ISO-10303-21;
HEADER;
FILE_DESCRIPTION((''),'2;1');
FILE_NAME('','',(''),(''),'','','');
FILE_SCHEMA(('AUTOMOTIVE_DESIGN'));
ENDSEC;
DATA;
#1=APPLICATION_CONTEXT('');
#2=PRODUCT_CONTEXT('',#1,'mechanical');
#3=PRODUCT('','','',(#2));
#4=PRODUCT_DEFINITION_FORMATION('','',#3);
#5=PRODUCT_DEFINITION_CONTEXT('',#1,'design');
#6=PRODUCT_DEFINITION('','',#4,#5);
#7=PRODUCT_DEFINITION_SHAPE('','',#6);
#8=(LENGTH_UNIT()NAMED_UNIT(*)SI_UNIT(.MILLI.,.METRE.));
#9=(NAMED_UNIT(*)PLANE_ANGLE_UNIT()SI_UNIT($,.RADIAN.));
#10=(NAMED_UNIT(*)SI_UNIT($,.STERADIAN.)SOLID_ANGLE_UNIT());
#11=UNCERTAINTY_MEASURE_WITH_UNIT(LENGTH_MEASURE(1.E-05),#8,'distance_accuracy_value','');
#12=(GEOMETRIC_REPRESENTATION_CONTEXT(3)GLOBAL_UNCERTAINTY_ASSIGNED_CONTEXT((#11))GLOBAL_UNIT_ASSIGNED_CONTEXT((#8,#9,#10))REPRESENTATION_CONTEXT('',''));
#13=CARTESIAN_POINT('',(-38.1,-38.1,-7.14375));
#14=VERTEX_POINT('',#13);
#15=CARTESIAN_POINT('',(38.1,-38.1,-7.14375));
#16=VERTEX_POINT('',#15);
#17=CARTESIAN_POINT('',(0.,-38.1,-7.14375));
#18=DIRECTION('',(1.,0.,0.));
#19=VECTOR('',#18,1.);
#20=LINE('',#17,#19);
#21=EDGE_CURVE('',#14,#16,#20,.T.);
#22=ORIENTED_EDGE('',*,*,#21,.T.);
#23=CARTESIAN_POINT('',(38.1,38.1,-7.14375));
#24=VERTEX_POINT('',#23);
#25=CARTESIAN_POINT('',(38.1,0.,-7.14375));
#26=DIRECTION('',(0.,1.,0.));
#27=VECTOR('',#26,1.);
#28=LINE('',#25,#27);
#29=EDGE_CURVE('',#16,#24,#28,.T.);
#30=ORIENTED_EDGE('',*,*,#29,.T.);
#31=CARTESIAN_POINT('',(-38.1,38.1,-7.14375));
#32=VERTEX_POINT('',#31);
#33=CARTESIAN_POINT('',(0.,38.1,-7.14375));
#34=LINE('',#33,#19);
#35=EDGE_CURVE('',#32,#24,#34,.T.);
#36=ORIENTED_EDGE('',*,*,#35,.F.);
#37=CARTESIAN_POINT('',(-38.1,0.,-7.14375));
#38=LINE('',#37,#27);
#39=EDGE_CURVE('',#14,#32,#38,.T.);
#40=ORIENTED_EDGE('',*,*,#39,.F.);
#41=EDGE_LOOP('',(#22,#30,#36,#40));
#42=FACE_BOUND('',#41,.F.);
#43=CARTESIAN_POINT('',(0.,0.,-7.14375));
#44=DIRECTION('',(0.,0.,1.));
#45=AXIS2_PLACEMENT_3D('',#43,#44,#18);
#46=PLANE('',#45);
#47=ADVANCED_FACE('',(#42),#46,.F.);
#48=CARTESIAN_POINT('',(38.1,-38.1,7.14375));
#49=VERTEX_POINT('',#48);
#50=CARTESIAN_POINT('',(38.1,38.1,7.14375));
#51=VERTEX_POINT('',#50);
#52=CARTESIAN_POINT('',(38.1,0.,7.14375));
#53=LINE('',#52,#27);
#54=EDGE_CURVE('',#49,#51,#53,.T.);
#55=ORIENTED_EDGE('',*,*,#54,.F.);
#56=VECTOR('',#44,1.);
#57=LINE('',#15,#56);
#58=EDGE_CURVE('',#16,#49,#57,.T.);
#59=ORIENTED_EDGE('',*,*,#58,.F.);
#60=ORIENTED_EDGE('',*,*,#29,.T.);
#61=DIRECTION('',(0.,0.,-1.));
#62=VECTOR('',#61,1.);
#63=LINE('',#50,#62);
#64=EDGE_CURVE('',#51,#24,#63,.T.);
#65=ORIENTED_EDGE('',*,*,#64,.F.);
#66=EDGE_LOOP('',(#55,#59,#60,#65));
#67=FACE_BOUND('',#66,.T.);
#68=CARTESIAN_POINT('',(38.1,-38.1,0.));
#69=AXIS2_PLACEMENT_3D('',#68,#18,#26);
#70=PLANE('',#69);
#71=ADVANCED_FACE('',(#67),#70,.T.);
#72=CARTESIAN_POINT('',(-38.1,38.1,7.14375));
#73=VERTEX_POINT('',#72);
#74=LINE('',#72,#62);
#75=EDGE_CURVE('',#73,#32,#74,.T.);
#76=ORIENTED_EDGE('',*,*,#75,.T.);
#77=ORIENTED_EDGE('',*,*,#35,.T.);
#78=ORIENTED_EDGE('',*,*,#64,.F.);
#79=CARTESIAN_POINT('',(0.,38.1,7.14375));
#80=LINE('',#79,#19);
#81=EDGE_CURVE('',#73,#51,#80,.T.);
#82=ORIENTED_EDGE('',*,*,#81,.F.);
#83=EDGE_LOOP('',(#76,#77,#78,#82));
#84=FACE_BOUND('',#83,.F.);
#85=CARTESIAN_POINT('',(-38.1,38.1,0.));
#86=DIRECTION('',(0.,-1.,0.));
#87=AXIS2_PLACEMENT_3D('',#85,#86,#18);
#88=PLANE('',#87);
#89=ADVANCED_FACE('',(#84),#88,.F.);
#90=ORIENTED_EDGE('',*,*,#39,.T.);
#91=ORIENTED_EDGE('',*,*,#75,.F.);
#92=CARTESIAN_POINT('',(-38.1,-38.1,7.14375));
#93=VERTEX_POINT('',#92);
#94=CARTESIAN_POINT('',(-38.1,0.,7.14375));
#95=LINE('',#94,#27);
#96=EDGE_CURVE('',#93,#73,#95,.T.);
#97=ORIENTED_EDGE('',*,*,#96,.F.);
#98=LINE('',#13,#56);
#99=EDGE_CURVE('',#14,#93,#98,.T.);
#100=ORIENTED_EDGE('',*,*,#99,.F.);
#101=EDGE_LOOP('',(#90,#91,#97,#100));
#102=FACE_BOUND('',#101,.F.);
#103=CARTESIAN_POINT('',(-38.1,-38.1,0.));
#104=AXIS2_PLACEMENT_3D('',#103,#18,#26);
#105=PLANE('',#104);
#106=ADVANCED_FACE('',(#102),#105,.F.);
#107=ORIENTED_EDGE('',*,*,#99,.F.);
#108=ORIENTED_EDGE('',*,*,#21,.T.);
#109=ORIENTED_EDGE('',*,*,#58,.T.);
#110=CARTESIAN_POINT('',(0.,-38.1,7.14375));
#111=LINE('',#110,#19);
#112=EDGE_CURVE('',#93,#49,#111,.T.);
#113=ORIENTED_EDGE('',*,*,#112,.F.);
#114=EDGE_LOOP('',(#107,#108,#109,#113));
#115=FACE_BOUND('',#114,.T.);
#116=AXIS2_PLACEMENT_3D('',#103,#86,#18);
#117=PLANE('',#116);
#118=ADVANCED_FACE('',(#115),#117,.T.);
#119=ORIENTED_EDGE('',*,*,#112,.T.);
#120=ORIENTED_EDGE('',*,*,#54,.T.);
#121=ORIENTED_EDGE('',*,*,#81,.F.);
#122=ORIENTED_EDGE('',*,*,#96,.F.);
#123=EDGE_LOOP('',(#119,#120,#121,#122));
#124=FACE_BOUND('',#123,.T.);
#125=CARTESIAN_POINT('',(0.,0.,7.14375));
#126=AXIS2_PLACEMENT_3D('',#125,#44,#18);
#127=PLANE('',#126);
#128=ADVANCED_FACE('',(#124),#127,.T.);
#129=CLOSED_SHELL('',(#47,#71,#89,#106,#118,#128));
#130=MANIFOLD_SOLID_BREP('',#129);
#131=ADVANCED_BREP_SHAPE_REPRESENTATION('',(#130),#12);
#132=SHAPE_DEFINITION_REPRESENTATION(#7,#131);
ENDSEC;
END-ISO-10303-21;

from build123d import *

# Parameters (mm, degrees)
F0_W     = 76.2
F0_H     = 76.2
F0_W_2   = 50.8
F0_H_2   = 50.8
F1_DEPTH = 7.14375


# Not quite as in the source:
# - a length typed as a fraction of an inch, garbled in the dataset ("3 / 203.2 mm" for 3/8 in), is restored


with BuildPart() as f1:
    # F0 (on Top) → F1 (new body, symmetric)
    with BuildSketch(Plane.XY):
        Rectangle(F0_W, F0_H)
        Rectangle(F0_W_2, F0_H_2, mode=Mode.SUBTRACT)
        Rectangle(F0_W_2, F0_H_2)
    extrude(amount=F1_DEPTH, both=True)


solid = f1.part
